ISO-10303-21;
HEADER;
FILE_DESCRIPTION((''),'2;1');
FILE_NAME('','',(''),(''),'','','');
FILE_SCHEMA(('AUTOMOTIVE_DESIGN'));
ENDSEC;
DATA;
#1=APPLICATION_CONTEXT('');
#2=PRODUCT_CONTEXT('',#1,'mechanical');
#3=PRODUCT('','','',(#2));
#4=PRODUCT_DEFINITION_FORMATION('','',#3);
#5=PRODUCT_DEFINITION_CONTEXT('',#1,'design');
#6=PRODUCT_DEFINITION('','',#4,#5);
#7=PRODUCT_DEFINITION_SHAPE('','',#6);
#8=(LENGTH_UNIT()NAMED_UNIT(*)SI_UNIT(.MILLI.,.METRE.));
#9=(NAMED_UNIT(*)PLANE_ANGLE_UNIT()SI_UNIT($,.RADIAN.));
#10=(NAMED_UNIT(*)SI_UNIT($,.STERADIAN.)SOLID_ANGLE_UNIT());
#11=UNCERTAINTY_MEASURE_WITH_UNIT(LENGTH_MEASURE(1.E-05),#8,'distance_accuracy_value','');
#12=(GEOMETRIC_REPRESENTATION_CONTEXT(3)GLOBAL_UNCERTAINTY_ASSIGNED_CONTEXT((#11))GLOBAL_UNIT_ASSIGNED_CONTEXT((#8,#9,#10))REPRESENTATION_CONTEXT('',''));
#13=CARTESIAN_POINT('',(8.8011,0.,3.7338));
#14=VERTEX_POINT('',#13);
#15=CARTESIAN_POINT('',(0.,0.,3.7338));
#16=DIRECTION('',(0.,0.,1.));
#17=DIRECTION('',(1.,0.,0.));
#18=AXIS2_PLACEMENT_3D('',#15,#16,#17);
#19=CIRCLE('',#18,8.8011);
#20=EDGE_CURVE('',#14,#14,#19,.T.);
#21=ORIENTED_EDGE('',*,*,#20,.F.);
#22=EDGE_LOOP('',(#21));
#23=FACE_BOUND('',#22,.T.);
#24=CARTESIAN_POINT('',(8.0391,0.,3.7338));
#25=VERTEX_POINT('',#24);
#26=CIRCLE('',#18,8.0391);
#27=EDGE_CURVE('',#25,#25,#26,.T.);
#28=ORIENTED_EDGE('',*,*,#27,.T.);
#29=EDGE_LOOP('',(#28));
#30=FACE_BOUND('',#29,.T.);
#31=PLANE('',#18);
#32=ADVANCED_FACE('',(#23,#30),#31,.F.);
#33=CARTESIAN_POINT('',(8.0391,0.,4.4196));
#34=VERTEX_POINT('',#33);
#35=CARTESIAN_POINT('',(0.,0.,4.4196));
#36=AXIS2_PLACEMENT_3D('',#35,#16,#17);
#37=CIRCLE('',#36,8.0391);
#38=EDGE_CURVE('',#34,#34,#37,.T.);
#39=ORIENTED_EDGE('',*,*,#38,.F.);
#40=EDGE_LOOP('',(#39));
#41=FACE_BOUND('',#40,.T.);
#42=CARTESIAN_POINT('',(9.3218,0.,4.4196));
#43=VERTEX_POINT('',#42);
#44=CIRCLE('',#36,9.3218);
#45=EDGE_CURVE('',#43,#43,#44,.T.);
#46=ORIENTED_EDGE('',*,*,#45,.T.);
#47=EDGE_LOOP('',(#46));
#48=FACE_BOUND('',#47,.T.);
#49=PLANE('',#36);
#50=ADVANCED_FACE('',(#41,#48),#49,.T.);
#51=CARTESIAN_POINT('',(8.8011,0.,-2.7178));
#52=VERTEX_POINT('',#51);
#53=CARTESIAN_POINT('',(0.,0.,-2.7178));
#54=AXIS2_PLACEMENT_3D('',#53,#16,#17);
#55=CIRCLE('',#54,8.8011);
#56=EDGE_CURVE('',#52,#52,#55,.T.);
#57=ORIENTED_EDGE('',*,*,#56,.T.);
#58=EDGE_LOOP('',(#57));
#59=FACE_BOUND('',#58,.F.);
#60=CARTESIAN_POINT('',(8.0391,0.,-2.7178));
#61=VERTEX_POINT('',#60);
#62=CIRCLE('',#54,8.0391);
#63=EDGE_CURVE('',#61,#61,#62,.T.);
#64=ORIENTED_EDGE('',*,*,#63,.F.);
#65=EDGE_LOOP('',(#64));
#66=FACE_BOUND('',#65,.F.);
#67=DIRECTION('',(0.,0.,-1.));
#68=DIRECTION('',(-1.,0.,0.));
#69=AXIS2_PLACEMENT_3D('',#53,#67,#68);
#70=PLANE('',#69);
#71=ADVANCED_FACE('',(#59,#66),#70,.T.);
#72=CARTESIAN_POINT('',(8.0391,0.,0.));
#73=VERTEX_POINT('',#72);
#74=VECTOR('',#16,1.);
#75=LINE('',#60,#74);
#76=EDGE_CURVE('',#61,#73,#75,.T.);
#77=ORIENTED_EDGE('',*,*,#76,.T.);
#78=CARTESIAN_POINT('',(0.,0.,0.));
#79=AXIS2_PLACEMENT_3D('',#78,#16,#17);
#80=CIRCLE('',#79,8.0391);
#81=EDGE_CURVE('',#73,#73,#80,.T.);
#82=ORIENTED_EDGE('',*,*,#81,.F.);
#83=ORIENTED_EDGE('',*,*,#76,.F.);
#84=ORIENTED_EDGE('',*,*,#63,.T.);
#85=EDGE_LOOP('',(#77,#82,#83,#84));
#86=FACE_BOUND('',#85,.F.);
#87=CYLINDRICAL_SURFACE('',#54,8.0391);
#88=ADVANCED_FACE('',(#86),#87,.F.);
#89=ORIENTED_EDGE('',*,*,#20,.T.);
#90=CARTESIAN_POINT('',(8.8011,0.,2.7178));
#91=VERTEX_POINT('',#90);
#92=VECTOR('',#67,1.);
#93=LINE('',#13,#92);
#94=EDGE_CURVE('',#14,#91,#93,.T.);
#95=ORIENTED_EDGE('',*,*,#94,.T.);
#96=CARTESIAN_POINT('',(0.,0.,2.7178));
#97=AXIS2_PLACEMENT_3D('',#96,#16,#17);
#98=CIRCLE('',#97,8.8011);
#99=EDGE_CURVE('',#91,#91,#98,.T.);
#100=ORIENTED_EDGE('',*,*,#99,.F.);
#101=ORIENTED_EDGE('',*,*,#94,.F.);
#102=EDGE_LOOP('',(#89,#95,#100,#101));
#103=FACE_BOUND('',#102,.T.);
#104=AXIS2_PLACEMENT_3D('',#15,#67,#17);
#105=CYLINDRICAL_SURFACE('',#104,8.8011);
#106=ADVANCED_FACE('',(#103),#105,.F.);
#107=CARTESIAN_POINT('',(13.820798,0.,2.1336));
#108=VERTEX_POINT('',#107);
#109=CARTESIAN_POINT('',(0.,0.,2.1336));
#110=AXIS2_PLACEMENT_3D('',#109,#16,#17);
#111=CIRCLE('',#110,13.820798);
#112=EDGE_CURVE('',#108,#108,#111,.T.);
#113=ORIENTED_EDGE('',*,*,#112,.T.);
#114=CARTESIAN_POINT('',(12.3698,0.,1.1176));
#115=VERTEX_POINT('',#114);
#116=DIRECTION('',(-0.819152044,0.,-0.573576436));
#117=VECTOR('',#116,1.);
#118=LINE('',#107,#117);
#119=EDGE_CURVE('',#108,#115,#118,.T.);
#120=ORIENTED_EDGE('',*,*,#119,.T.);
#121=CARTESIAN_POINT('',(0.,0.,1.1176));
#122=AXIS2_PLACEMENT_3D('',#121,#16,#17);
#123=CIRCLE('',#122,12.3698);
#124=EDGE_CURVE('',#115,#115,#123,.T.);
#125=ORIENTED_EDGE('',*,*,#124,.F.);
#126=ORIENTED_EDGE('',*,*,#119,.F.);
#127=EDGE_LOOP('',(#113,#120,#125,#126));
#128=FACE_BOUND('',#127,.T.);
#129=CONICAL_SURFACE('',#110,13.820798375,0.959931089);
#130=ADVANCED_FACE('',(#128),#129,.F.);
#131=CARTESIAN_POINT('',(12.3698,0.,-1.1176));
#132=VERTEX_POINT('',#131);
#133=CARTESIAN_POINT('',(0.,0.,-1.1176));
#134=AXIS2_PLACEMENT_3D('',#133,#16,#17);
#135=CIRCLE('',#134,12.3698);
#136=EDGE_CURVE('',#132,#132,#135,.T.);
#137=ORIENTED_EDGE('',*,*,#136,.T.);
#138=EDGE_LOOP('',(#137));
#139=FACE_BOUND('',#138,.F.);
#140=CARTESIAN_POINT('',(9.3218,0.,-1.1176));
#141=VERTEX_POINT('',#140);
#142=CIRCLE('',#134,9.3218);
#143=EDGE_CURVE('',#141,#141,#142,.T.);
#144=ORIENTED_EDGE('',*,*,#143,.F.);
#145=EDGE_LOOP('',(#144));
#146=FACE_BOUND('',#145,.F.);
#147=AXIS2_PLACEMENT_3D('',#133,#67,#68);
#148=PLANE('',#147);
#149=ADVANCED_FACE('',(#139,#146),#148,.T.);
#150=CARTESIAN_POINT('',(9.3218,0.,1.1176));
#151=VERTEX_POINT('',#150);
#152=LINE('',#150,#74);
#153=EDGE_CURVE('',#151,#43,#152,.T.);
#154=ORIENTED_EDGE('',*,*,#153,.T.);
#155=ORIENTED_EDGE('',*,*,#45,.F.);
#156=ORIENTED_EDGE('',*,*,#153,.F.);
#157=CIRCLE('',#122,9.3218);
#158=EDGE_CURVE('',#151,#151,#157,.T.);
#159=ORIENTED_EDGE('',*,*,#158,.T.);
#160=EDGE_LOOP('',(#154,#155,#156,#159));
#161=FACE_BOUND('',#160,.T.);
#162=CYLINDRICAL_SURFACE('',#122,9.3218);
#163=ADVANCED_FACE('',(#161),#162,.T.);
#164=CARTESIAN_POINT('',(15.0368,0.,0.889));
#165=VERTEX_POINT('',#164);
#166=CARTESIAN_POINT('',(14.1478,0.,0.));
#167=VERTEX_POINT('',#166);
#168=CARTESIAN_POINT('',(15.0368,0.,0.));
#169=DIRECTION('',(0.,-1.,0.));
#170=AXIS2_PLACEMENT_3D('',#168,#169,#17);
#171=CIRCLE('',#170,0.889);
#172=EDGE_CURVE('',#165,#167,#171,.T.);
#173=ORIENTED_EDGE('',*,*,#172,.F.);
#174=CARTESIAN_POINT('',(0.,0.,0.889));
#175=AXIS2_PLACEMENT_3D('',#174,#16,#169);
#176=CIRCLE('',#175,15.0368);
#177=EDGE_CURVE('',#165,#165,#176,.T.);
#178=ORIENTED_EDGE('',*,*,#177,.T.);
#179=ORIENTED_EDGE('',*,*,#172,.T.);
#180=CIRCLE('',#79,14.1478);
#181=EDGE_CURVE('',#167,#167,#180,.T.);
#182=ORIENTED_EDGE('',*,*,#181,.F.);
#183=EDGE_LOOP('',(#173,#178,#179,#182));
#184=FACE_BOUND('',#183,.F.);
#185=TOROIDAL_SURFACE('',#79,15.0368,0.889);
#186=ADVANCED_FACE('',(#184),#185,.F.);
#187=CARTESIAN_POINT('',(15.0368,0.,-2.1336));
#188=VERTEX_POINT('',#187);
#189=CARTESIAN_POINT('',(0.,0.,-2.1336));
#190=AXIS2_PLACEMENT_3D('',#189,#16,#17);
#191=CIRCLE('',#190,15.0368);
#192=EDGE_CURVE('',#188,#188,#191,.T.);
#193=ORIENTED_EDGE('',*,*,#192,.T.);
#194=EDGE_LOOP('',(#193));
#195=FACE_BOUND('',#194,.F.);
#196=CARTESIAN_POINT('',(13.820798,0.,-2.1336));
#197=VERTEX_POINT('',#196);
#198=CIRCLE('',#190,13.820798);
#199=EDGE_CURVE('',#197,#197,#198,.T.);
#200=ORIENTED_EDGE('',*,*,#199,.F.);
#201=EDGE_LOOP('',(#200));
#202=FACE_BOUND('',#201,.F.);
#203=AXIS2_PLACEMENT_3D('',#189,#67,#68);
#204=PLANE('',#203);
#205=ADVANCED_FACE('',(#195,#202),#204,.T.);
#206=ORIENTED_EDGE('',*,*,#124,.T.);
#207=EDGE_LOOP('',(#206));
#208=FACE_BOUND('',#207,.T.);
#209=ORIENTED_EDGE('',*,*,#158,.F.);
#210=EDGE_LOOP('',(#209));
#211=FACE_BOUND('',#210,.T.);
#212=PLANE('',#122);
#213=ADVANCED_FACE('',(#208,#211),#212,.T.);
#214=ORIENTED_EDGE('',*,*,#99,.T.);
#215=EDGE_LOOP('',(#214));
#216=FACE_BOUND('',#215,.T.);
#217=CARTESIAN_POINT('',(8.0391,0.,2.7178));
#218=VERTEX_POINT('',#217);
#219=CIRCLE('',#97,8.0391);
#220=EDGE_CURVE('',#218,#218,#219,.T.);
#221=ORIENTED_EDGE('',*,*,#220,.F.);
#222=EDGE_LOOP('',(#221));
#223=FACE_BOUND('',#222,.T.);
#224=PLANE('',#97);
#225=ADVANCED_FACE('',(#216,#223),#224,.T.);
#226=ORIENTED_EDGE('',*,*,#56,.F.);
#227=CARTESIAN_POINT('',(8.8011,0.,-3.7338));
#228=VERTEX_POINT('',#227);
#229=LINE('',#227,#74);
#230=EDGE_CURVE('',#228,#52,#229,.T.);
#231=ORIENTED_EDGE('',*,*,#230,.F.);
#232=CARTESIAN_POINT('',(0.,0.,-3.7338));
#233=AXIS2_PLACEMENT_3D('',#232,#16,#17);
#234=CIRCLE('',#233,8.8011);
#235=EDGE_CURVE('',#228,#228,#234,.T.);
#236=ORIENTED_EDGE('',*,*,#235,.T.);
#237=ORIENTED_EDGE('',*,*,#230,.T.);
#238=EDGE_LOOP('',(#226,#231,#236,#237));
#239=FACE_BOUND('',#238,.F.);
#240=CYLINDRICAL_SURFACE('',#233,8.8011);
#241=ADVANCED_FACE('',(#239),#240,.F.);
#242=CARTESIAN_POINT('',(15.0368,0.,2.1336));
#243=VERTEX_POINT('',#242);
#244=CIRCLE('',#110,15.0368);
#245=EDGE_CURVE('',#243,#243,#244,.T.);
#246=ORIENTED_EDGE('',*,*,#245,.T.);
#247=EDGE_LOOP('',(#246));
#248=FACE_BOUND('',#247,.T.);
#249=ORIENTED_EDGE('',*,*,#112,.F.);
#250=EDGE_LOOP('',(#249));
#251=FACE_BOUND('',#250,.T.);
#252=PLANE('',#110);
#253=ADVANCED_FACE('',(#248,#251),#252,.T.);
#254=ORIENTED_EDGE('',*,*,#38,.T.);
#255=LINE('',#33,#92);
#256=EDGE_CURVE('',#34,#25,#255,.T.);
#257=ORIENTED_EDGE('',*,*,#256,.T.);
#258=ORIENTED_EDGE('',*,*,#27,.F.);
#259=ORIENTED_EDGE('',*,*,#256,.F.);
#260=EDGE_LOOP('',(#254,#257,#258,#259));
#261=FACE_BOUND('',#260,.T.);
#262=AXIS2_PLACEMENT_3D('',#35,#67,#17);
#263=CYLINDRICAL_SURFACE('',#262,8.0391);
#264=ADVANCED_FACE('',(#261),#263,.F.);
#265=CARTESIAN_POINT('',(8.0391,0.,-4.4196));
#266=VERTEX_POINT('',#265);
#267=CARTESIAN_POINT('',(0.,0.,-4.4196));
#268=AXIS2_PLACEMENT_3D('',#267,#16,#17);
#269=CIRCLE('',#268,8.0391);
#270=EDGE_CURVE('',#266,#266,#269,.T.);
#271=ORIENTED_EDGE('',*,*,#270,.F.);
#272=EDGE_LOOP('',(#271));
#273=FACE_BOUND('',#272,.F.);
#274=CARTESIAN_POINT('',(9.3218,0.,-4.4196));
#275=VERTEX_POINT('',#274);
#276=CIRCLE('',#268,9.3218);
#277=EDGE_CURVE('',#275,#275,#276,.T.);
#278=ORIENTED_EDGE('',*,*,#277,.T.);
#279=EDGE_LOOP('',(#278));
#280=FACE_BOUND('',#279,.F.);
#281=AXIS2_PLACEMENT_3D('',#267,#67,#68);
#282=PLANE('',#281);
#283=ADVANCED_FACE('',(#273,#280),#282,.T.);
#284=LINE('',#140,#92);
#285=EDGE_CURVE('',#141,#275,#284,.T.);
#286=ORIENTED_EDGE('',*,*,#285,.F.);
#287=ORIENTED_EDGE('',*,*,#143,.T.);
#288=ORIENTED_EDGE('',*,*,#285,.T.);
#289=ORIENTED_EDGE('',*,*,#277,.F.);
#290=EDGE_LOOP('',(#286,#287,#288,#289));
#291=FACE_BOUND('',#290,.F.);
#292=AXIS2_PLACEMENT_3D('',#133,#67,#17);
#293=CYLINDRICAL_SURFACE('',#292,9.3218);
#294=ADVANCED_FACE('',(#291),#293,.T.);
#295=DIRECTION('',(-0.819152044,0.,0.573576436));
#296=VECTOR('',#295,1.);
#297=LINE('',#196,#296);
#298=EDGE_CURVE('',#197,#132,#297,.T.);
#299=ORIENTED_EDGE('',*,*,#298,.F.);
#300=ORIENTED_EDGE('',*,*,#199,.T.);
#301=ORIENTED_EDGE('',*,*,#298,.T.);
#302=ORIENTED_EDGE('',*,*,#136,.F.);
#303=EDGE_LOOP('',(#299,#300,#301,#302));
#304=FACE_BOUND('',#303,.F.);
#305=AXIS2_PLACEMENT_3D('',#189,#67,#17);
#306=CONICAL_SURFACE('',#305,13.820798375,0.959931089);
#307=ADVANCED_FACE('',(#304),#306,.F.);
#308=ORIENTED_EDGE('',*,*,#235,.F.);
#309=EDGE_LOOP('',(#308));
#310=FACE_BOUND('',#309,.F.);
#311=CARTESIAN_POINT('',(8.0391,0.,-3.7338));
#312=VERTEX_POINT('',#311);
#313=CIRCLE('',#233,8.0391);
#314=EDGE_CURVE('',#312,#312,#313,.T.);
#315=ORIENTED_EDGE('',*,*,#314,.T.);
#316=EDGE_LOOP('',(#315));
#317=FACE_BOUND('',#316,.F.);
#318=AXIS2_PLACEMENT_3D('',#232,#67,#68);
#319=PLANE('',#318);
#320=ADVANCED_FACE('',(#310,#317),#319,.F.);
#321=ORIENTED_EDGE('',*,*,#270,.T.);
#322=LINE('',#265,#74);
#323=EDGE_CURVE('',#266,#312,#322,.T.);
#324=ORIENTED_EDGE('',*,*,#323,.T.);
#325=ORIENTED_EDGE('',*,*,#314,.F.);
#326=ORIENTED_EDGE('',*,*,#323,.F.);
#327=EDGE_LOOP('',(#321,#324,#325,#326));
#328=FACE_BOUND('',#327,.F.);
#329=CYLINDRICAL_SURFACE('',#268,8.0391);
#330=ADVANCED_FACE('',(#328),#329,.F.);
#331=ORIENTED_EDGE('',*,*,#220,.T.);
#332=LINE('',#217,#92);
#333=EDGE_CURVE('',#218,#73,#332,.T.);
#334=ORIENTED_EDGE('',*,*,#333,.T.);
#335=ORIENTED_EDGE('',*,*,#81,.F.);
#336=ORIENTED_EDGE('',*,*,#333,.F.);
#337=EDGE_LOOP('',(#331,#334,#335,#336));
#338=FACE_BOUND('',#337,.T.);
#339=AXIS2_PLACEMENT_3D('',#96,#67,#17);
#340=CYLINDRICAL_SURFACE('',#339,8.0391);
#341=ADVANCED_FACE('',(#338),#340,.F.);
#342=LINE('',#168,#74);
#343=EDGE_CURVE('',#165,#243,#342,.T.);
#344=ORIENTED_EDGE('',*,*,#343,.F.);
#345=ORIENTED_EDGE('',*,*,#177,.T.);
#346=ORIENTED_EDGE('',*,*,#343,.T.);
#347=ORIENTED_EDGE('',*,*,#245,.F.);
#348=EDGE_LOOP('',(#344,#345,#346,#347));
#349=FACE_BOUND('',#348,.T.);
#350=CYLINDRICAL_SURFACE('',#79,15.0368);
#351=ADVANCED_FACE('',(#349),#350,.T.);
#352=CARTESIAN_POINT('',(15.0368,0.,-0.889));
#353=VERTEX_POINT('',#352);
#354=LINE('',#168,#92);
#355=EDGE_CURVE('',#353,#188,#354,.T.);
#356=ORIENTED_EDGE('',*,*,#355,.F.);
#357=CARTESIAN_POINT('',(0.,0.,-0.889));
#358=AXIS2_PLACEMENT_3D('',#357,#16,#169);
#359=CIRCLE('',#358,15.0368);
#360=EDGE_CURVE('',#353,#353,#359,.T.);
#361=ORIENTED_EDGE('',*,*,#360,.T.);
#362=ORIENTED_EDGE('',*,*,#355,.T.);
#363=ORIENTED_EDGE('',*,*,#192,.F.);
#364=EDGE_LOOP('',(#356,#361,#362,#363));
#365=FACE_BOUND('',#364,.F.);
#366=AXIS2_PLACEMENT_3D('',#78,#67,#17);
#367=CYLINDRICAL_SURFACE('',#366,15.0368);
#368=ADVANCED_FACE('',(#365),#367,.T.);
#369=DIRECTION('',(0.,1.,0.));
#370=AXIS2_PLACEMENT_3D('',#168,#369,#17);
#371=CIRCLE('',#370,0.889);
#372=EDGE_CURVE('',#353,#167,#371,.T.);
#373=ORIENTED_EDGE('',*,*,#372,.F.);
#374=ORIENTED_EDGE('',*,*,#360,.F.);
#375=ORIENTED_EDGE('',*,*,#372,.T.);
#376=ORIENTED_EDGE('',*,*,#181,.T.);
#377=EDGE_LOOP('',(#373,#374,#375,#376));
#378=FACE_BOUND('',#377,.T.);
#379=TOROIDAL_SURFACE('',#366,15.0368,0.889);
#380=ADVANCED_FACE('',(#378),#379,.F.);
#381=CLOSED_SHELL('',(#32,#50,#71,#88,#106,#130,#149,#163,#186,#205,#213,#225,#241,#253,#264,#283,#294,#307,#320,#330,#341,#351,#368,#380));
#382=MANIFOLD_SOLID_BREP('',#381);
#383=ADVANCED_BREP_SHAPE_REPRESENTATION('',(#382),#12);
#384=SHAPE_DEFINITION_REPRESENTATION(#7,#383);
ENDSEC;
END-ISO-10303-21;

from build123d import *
from build123d import SkipClean  # not in build123d's __all__

# Parameters (mm, degrees)
F2_R = 0.889


with BuildPart() as f1:
    # F0 (on Front) → F1 (revolve)
    with BuildSketch(Plane.XZ):
        Polygon((8.0391, 2.7178), (8.0391, 0), (15.0368, 0), (15.0368, 2.1336), (13.8207983748, 2.1336), (12.3698, 1.1176), (9.3218, 1.1176), (9.3218, 4.4196), (8.0391, 4.4196), (8.0391, 3.7338), (8.8011, 3.7338), (8.8011, 2.7178), align=None)
    revolve(axis=Axis((0, 0, 19.8358264327), (0, 0, 1)))

    # F2 (on Front) → F3 (revolve, cut)
    with BuildSketch(Plane.XZ):
        with Locations((15.0368, 0)):
            Circle(F2_R)
    revolve(axis=Axis((0, 0, 19.8358264327), (0, 0, 1)), mode=Mode.SUBTRACT)

    # F4: F1 across plane


with BuildPart() as f1_1:
    add(f1.part, clean=False)
    with SkipClean():  # cleaning this boolean's faces spoils the solid; the shape is the same uncleaned
        add(f1.part.mirror(Plane.XY), clean=False)


solid = f1_1.part
